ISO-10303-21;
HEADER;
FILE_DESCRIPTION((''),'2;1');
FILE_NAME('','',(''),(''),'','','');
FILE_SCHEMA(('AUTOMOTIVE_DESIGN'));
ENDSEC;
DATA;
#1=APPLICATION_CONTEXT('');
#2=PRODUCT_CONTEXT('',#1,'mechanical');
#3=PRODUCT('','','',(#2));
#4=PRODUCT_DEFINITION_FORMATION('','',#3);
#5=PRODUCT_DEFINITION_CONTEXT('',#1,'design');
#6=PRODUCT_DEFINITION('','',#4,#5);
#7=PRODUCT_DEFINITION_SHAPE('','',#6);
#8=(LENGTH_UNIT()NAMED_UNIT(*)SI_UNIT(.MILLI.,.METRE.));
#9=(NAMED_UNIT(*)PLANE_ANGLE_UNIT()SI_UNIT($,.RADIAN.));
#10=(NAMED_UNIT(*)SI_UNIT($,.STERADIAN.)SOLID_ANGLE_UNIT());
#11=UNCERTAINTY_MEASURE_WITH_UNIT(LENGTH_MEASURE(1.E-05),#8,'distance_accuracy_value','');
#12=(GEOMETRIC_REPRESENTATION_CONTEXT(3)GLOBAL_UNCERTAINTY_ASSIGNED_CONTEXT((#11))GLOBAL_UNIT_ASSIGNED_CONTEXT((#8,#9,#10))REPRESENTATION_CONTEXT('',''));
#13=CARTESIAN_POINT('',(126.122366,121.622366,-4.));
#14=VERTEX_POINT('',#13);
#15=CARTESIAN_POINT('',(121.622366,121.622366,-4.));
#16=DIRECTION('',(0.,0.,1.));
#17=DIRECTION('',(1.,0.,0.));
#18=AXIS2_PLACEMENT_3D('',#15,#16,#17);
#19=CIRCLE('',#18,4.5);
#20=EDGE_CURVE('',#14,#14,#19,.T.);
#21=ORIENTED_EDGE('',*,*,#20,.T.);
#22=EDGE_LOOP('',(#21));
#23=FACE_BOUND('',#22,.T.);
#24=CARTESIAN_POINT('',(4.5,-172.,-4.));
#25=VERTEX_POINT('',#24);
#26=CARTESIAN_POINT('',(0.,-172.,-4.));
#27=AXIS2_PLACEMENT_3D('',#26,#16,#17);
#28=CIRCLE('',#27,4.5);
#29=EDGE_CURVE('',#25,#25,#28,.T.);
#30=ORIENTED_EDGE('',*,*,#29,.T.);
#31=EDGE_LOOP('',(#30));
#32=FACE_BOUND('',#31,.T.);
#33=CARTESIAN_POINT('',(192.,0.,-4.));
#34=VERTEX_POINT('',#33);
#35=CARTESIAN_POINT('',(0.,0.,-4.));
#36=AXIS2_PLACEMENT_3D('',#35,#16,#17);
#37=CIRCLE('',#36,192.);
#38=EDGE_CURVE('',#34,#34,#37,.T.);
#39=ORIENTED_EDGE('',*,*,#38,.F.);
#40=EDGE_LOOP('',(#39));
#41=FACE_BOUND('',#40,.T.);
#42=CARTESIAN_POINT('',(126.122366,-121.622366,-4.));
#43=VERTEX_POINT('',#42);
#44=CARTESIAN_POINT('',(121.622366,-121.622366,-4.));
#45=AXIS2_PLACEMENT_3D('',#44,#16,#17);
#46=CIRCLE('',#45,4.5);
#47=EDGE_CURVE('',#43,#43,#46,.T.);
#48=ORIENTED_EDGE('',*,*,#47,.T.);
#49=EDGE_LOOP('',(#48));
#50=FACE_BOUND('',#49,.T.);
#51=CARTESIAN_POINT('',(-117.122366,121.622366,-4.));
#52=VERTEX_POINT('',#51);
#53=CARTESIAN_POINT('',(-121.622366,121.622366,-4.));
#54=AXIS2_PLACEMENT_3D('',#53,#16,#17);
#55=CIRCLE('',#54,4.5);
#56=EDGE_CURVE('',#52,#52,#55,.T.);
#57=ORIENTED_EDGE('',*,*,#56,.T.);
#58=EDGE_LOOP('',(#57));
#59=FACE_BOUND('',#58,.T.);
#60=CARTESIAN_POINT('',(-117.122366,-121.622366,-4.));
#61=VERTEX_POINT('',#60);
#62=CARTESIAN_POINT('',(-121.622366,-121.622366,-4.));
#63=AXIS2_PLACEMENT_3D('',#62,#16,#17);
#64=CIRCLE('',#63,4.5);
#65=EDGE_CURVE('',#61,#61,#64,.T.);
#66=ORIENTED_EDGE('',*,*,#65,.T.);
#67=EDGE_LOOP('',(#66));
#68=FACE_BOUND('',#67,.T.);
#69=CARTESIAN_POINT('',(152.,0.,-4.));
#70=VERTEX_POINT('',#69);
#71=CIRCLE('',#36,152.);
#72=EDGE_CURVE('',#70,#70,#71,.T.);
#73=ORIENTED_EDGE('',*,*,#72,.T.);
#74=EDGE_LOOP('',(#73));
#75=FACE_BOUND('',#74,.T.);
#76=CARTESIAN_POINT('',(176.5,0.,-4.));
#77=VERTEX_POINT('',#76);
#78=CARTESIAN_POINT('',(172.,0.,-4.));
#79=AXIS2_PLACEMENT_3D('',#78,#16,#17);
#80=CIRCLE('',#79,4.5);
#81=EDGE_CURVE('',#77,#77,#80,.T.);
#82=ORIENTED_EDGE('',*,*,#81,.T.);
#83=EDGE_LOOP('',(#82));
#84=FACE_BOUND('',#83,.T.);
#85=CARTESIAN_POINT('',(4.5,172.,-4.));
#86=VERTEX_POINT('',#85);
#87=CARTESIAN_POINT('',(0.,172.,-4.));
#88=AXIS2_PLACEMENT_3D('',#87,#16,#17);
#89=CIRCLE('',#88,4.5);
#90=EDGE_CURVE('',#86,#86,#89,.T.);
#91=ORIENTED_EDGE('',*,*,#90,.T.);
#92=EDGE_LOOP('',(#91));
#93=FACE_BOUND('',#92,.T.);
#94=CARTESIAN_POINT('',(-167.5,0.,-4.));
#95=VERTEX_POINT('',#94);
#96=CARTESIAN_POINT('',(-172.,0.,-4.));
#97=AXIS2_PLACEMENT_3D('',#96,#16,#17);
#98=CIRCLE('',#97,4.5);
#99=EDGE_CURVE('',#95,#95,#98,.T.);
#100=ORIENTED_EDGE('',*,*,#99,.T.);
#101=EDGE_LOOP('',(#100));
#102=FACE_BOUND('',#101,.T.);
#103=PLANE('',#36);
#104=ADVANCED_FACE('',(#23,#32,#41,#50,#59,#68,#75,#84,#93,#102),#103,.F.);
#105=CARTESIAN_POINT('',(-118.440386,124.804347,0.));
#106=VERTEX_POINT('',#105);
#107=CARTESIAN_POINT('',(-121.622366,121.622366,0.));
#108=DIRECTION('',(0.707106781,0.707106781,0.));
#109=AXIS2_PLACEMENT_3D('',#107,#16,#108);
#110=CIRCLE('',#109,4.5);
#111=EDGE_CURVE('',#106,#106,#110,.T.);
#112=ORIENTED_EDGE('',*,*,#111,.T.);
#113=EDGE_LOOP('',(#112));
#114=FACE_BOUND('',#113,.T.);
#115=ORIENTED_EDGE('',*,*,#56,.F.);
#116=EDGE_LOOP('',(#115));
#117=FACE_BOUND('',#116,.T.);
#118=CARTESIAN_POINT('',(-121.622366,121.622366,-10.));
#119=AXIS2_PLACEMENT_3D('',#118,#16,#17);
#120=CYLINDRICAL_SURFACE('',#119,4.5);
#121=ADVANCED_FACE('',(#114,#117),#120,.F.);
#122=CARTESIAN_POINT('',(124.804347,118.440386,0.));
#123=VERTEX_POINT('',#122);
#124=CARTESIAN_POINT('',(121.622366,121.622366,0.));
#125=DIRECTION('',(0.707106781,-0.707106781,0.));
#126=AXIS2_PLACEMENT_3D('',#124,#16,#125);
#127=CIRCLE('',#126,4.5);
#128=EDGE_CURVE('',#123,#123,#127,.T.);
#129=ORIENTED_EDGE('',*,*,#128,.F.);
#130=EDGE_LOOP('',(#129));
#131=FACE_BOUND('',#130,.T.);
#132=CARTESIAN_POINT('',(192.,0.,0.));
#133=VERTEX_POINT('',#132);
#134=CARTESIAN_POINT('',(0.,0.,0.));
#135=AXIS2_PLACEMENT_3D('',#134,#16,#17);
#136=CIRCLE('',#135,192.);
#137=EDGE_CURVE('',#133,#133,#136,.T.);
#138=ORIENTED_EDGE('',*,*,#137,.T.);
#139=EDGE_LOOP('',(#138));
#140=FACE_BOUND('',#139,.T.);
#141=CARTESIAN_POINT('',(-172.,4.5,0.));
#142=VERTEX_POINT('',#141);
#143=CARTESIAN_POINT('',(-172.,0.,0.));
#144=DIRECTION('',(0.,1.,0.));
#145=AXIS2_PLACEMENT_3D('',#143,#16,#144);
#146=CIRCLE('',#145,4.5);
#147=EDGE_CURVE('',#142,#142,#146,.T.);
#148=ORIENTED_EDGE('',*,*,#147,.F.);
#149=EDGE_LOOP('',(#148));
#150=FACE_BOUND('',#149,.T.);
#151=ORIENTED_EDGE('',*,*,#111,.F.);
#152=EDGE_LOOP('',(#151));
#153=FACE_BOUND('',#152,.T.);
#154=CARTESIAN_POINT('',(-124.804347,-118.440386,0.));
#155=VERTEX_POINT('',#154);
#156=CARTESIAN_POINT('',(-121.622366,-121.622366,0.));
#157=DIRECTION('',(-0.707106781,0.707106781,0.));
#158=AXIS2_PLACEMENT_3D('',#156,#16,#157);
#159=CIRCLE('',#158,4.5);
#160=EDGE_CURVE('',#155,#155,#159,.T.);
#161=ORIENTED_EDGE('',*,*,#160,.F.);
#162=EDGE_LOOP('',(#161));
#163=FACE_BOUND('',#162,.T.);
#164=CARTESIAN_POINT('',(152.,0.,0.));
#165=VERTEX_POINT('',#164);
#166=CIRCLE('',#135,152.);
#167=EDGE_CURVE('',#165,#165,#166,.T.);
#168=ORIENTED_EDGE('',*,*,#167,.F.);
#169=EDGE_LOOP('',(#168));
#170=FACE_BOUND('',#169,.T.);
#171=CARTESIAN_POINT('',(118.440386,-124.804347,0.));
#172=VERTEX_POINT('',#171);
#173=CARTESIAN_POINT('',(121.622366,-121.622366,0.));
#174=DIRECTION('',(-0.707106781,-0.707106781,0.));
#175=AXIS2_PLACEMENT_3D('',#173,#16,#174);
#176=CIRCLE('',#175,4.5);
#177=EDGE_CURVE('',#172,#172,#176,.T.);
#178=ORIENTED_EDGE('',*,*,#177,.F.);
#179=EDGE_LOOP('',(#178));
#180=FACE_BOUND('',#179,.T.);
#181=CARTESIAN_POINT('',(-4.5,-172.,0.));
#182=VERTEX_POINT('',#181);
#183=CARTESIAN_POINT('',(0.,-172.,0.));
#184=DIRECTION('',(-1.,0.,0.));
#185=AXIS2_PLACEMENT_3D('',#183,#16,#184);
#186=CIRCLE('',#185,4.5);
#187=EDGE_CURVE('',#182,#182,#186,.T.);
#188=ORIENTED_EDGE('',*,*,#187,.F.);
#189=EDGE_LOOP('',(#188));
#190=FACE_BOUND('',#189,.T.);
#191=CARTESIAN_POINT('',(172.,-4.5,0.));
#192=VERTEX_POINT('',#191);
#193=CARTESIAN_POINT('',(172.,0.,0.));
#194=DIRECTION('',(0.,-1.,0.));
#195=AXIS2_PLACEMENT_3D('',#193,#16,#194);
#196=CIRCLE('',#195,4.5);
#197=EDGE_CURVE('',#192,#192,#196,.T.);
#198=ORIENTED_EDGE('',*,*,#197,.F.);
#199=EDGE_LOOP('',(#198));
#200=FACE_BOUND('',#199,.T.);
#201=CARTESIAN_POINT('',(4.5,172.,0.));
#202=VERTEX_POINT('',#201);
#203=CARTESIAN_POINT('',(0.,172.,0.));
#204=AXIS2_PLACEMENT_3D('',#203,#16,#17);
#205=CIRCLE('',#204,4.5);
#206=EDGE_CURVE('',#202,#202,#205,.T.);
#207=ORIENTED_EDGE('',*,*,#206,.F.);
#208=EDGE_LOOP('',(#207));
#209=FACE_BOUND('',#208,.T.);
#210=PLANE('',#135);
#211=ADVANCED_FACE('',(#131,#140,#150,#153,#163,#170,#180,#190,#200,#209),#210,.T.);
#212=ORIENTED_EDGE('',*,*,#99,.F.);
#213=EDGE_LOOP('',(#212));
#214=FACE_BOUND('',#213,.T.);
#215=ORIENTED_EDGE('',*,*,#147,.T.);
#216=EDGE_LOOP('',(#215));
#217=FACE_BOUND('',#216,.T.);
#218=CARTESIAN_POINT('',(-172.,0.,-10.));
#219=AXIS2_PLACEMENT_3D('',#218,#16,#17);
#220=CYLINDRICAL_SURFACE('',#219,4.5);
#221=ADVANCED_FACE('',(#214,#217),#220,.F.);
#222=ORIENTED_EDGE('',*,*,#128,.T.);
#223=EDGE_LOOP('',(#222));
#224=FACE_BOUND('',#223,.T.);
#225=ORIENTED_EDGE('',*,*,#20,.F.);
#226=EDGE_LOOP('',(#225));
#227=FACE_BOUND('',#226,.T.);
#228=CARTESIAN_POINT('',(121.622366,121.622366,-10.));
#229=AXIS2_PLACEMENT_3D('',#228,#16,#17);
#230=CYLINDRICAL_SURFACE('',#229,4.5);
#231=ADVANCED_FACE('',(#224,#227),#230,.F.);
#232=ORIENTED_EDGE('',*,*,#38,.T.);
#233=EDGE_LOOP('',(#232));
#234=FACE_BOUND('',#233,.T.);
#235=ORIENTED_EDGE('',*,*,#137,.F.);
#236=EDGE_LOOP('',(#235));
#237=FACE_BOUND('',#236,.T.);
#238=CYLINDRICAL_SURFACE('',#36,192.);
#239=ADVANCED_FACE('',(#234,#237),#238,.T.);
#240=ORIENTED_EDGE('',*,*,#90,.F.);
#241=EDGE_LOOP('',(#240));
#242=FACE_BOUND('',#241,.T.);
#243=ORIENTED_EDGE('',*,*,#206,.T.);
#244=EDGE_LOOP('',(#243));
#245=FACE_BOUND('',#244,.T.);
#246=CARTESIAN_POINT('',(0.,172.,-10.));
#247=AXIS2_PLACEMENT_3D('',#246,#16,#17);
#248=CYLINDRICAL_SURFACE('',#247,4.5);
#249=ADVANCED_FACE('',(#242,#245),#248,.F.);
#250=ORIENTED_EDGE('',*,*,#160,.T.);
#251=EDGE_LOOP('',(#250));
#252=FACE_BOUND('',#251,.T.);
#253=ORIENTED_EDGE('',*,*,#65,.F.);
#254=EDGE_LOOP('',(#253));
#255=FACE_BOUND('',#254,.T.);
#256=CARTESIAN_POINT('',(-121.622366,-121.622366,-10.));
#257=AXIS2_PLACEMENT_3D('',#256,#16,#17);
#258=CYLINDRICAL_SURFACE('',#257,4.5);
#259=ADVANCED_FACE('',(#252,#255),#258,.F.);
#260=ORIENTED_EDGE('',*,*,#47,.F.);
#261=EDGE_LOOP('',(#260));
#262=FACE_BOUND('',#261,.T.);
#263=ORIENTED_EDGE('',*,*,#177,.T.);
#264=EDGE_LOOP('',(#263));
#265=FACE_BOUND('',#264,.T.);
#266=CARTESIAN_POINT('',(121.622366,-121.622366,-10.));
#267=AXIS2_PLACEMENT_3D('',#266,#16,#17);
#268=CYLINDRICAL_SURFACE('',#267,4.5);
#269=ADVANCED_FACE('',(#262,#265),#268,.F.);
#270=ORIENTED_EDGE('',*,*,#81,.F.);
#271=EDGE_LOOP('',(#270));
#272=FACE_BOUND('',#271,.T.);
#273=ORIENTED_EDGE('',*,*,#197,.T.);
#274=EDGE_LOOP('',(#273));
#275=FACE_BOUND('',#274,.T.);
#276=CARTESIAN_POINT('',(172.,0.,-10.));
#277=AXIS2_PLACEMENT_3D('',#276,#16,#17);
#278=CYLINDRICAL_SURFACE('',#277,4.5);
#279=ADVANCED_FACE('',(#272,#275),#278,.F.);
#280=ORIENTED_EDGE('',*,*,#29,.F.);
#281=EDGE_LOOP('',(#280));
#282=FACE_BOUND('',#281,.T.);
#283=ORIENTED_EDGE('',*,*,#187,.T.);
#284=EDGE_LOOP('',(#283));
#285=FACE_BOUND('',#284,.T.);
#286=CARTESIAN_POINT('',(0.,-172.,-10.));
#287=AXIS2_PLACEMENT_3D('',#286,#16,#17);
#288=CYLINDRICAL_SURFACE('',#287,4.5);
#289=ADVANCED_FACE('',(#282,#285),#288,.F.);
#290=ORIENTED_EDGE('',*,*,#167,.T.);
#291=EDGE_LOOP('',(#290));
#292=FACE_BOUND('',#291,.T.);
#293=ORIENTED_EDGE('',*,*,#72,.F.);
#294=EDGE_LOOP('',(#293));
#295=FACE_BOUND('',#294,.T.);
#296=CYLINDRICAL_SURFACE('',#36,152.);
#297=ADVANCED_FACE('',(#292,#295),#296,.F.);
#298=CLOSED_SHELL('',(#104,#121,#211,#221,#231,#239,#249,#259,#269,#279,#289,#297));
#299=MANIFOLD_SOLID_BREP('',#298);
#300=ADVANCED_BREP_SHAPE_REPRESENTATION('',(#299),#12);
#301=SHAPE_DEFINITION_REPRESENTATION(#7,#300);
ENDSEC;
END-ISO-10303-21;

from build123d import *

# Parameters (mm, degrees)
SKETCH1_R          = 192
SKETCH1_R_2        = 152
BASE_FLANGE1_DEPTH = 4
SKETCH2_R          = 4.5
CUT_EXTRUDE1_DEPTH = 10
CIRPATTERN1_COUNT  = 8


# Sheet-metal steps are written as plain solids
with BuildPart() as part:
    # Sketch1 → Base-Flange1 (new body)
    with BuildSketch(Plane.XY):
        Circle(SKETCH1_R)
        Circle(SKETCH1_R_2, mode=Mode.SUBTRACT)
    extrude(amount=-BASE_FLANGE1_DEPTH)

    # Sketch2 → Cut-Extrude1 (cut)
    with BuildSketch(Plane.XY):
        with Locations((0, 172)):
            Circle(SKETCH2_R)
    cut_extrude1 = extrude(amount=-CUT_EXTRUDE1_DEPTH, mode=Mode.SUBTRACT)

    # CirPattern1: Cut-Extrude1 ×8 about axis
    cirpattern1_axis = Axis((0, 0, 0), (0, 0, 1))
    for i in range(1, CIRPATTERN1_COUNT):
        add(cut_extrude1.rotate(cirpattern1_axis, i * 360 / CIRPATTERN1_COUNT), mode=Mode.SUBTRACT)


solid = part.part
